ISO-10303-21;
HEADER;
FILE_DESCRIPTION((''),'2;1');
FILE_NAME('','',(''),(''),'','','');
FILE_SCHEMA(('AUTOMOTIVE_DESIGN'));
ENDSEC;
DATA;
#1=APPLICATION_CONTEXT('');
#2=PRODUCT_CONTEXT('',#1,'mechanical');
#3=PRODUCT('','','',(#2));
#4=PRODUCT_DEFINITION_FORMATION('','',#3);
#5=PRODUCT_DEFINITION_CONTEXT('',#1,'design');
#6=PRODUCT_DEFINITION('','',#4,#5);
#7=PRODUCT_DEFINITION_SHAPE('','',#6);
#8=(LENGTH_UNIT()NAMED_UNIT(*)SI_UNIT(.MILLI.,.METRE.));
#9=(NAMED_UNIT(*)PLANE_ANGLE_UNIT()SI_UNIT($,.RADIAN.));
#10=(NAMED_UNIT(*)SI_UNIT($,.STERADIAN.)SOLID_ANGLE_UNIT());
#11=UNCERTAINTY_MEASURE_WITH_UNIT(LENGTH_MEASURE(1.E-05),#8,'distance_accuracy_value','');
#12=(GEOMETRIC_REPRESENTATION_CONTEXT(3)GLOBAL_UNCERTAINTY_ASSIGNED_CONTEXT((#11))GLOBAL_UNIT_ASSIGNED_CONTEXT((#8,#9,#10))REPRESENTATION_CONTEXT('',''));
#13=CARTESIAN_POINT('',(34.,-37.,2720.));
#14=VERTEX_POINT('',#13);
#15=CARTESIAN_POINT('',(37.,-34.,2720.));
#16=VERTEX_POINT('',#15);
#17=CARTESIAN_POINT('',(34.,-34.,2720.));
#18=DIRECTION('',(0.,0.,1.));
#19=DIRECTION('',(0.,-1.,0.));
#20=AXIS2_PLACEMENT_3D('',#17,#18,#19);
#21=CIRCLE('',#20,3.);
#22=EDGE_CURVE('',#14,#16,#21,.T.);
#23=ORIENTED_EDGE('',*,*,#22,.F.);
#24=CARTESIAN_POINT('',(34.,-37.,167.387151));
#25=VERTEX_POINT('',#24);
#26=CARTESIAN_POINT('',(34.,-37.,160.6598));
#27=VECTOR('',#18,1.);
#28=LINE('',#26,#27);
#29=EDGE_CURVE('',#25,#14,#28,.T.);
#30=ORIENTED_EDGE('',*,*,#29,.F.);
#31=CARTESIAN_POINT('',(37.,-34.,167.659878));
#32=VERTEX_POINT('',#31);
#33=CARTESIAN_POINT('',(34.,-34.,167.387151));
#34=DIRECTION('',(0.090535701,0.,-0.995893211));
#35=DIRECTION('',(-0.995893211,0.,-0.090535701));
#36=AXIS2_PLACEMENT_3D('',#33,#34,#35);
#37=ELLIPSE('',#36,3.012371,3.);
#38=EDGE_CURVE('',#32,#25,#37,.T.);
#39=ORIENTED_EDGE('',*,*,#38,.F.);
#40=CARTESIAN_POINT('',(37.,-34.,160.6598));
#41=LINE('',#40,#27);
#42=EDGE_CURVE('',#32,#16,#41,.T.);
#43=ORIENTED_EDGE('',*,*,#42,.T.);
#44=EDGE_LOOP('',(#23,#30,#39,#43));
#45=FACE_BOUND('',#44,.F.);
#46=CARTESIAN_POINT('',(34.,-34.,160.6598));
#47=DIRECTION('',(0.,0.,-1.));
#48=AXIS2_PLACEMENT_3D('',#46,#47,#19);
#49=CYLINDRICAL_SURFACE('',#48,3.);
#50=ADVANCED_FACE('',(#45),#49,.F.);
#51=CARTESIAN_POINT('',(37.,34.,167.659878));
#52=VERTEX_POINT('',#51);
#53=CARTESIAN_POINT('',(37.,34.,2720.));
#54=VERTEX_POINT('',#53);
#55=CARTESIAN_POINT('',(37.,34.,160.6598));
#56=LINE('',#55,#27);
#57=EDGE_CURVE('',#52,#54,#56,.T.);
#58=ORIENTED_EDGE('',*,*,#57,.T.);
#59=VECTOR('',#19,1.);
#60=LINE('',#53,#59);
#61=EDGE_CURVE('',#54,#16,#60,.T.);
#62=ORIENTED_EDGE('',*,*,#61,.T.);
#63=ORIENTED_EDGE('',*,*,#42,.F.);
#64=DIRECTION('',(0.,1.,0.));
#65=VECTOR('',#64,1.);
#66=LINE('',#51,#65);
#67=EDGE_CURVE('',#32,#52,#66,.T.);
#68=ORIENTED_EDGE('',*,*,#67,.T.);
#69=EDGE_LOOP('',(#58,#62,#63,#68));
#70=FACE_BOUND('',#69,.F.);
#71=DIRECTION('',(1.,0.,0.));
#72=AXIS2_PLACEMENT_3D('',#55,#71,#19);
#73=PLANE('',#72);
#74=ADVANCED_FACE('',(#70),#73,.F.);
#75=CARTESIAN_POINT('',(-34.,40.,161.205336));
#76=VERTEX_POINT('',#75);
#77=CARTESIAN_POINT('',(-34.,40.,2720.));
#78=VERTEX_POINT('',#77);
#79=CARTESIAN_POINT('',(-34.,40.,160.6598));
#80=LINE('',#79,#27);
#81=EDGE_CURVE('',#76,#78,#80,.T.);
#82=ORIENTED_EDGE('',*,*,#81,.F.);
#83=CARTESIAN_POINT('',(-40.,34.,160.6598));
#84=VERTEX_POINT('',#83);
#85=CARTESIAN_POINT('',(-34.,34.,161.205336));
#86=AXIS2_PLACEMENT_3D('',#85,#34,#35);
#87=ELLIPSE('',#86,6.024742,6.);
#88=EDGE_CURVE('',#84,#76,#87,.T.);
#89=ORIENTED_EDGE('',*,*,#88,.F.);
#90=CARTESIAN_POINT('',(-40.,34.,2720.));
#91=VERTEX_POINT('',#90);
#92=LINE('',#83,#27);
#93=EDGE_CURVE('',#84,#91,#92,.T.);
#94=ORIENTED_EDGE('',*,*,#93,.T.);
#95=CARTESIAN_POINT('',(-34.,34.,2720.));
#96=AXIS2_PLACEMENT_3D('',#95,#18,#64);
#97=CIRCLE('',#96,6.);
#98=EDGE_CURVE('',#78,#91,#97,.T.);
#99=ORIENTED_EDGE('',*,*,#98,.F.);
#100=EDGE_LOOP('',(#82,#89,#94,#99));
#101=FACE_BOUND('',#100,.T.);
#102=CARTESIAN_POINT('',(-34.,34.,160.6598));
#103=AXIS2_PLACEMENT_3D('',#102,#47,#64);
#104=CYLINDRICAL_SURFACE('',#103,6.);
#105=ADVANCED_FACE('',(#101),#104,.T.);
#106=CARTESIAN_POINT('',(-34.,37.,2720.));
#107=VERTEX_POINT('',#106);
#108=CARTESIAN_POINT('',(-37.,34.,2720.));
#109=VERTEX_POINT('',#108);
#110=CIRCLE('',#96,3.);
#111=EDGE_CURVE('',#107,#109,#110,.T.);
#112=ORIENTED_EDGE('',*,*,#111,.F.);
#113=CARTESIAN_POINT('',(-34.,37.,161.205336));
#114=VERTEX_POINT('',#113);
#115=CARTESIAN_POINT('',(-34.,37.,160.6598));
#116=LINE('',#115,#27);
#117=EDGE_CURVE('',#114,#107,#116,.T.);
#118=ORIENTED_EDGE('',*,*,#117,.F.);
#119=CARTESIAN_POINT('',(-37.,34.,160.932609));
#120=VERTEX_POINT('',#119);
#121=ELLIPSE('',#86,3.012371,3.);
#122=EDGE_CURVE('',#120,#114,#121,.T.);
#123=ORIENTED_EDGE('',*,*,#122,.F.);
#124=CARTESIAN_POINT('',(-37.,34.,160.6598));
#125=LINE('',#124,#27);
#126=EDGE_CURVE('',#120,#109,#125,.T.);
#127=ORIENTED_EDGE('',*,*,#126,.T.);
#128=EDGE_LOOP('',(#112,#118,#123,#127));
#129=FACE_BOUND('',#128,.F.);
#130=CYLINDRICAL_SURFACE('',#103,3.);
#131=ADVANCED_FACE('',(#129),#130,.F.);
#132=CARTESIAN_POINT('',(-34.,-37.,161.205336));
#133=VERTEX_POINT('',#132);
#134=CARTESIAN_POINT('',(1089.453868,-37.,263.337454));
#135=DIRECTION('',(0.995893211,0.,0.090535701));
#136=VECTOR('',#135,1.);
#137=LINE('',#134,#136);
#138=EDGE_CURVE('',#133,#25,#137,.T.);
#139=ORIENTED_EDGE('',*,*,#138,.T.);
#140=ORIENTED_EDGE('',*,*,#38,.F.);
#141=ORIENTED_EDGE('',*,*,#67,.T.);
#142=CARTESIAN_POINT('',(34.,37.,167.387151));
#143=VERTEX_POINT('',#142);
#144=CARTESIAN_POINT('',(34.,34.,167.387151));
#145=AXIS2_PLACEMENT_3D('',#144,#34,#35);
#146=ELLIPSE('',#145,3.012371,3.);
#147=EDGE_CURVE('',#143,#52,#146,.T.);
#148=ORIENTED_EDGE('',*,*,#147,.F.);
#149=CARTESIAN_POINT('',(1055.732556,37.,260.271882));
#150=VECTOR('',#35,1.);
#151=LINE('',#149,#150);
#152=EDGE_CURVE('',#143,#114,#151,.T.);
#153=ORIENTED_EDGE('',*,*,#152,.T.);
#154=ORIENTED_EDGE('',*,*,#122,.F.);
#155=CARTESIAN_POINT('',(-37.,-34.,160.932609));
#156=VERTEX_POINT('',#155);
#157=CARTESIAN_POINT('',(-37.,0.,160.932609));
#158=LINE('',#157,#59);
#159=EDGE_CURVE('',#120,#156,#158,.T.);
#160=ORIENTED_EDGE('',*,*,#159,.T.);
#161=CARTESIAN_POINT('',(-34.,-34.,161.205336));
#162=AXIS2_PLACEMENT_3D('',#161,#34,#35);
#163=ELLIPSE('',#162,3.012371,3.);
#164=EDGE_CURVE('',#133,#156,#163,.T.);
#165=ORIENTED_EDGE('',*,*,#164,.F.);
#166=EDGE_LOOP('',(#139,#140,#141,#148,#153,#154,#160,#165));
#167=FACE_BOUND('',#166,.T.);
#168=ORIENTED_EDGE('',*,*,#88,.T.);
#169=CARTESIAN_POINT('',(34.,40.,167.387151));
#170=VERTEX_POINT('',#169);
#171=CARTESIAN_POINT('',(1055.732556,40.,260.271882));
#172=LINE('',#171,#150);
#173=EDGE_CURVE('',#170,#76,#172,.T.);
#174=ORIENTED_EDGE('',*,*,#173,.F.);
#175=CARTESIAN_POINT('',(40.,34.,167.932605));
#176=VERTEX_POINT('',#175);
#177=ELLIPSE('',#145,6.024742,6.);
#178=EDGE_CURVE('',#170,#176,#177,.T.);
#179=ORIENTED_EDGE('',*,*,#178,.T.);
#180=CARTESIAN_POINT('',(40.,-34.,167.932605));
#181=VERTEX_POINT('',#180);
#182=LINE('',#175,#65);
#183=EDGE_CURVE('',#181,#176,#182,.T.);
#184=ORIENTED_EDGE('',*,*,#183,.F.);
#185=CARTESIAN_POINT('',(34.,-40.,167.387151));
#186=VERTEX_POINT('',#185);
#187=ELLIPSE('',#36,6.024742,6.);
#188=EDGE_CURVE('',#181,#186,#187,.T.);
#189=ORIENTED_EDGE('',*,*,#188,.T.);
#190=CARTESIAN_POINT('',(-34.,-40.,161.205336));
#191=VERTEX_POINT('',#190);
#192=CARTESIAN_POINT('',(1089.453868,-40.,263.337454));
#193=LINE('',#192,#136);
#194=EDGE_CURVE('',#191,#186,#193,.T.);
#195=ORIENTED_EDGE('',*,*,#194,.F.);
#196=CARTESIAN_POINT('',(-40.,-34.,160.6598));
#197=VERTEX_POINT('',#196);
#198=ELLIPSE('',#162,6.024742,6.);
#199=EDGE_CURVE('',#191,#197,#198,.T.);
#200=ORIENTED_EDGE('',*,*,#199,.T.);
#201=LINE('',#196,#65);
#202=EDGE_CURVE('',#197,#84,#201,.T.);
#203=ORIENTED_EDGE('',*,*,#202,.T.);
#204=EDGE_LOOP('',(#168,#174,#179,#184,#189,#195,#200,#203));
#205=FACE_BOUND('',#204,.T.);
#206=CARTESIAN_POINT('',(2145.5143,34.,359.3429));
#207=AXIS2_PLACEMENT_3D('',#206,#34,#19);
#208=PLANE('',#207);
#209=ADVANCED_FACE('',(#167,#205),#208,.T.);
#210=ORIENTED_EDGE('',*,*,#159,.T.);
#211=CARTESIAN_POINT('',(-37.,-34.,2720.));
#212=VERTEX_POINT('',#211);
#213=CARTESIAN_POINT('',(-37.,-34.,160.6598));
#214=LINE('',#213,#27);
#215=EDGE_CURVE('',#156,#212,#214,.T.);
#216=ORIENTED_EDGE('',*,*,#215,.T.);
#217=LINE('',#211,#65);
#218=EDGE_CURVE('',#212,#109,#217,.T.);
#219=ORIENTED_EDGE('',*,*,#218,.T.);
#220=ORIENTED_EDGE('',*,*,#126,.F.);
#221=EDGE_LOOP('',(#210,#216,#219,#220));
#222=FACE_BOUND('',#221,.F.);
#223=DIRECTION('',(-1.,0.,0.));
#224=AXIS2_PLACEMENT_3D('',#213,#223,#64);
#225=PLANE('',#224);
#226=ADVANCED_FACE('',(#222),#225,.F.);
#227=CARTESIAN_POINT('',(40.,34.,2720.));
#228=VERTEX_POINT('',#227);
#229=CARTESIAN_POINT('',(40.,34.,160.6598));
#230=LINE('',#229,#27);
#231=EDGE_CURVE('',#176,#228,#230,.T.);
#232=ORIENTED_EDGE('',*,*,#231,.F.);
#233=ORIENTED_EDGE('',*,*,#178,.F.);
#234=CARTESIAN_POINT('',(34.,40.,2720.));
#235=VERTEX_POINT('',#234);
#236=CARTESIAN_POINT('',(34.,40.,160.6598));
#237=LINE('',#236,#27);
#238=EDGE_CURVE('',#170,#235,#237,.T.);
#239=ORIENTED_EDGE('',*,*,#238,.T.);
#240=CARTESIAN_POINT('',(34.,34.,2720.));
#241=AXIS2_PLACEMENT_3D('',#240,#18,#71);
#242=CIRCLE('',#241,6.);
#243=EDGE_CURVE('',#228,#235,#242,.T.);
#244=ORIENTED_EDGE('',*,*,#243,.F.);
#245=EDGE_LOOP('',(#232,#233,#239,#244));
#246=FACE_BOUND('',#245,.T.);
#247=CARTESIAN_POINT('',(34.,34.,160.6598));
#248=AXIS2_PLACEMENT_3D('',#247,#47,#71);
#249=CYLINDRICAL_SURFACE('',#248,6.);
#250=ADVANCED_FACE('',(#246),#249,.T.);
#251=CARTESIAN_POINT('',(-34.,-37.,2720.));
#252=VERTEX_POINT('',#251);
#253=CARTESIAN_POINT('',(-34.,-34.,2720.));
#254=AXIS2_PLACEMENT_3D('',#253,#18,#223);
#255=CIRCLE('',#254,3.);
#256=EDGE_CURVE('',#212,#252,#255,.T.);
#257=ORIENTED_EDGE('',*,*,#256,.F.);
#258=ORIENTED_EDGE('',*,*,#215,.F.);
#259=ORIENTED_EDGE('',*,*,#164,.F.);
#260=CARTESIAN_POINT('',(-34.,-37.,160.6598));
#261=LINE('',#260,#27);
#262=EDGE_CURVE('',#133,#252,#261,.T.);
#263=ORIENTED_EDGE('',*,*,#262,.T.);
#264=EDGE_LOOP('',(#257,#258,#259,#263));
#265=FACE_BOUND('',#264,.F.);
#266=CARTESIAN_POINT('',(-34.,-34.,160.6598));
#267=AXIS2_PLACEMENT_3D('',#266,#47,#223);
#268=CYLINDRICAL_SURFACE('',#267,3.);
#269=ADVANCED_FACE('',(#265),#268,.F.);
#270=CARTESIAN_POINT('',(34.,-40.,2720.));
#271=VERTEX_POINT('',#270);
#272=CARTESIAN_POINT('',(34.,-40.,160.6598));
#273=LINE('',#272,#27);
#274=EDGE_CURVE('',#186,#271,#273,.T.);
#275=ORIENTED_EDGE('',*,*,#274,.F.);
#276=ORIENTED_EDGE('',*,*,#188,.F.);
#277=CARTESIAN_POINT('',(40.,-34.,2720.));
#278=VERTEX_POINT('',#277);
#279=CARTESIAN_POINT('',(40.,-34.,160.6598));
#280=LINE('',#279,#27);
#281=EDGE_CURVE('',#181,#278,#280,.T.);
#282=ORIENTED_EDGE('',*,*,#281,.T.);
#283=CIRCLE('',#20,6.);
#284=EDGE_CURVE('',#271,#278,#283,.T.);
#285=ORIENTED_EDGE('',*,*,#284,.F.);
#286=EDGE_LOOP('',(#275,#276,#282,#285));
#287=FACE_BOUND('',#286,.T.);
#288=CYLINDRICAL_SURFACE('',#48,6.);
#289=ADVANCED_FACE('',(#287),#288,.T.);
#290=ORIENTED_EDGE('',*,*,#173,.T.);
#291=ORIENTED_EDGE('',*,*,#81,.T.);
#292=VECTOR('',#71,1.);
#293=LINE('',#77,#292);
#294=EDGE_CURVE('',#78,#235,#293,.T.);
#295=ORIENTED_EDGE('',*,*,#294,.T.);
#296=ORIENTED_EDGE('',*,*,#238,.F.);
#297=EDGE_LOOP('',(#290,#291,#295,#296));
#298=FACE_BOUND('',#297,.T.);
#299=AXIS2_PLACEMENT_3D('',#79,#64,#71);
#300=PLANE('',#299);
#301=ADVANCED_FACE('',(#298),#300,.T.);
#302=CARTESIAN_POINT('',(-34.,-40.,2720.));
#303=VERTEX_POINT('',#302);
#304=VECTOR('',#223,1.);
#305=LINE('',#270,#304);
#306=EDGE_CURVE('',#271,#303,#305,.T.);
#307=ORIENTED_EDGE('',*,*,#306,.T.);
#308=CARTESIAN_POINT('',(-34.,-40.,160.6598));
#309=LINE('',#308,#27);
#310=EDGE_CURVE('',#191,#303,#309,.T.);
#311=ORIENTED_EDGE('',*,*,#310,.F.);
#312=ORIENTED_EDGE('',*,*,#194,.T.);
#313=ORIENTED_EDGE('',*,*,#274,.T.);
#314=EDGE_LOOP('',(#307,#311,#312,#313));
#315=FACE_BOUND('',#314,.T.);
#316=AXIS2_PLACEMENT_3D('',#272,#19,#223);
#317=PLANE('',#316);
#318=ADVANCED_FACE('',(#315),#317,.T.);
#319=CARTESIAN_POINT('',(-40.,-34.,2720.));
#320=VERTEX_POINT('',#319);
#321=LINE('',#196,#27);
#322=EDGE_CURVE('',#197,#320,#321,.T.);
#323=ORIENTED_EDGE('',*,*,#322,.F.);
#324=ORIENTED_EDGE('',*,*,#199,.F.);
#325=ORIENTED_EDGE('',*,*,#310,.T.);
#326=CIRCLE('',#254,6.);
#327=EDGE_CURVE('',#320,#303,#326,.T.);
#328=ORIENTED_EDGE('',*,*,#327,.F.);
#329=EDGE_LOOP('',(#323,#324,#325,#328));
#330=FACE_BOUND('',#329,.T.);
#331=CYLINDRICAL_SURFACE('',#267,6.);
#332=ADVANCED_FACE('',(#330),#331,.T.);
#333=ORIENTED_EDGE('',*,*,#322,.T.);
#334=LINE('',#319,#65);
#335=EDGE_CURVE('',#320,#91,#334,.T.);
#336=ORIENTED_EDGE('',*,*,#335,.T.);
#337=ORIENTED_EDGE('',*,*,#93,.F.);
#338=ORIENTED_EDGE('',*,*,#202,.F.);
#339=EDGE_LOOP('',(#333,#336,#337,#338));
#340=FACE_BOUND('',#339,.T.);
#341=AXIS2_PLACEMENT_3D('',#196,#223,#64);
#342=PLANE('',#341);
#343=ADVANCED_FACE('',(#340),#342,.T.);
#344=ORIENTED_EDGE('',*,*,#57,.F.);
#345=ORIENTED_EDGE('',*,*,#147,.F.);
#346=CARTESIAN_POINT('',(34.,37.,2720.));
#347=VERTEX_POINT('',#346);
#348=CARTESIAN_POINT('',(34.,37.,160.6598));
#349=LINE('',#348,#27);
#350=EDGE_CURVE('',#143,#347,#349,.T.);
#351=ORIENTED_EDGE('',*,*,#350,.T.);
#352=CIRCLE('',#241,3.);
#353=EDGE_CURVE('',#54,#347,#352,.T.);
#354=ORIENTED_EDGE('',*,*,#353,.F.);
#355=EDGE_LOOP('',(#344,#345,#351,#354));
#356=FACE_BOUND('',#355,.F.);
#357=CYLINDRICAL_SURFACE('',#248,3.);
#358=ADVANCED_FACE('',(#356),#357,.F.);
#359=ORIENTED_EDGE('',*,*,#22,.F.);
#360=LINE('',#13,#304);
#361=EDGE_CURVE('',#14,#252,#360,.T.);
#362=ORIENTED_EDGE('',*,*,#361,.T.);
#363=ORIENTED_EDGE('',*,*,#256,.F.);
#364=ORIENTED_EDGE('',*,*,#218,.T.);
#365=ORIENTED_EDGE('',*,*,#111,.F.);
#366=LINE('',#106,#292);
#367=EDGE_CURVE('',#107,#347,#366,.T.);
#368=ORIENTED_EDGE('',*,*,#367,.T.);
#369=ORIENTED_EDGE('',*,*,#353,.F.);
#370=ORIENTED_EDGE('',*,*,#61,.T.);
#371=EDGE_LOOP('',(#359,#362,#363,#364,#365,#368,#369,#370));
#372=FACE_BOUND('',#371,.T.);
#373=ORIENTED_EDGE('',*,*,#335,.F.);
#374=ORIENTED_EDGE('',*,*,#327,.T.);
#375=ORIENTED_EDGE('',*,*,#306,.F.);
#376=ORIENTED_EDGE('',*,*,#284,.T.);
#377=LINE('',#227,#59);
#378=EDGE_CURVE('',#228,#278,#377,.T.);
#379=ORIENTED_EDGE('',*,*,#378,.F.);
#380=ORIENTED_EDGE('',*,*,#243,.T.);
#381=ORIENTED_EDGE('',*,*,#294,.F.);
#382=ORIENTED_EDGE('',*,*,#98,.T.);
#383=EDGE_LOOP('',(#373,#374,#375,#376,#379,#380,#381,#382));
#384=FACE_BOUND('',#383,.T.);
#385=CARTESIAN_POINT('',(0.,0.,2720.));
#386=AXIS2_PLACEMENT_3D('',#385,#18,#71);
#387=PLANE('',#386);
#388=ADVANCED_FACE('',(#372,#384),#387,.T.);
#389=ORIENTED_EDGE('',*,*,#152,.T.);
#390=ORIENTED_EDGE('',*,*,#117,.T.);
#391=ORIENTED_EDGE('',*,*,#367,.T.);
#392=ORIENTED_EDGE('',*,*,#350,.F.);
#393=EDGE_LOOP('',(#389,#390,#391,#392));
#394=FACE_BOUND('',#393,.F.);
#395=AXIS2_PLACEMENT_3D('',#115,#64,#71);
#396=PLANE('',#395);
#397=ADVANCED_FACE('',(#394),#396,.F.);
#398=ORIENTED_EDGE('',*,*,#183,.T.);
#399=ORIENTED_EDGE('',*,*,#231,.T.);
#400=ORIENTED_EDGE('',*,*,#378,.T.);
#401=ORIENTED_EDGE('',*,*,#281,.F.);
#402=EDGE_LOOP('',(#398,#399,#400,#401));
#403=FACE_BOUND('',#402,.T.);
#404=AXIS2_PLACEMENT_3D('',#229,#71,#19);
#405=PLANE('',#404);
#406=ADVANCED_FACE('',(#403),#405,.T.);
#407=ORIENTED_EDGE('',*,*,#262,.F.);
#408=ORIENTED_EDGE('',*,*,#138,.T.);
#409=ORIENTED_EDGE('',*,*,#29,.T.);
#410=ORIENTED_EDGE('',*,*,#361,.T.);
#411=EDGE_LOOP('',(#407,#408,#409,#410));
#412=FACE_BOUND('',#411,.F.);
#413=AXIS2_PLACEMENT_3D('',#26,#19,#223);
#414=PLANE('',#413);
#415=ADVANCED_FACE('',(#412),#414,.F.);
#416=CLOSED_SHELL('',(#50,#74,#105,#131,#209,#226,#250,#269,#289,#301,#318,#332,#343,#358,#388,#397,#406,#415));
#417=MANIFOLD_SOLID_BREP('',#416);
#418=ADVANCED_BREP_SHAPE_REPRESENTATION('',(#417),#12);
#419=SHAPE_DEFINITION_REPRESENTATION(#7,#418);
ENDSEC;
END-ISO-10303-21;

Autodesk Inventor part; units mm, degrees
ref_plane "Start Plane" through (0, 0, 160.6598) normal (0, 0, 1) x (1, 0, 0)
ref_plane "End Plane" through (0, 0, 2720) normal (0, 0, 1) x (1, 0, 0)
sketch "Sketch" plane through (0, 0, 0) normal (0, 0, 1) x (1, 0, 0)
  line L0 (-40, -34) -> (-40, 34)
  line L1 (-34, 40) -> (34, 40)
  line L2 (40, 34) -> (40, -34)
  line L3 (34, -40) -> (-34, -40)
  arc A0 (-40, -34) -> (-34, -40) centre (-34, -34) ccw
  arc A1 (40, 34) -> (34, 40) centre (34, 34) ccw
  arc A2 (-34, 40) -> (-40, 34) centre (-34, 34) ccw
  arc A3 (34, -40) -> (40, -34) centre (34, -34) ccw
  arc A4 (-34, 37) -> (-37, 34) centre (-34, 34) ccw
  line L4 (-34, 37) -> (34, 37)
  arc A5 (37, 34) -> (34, 37) centre (34, 34) ccw
  line L5 (37, 34) -> (37, -34)
  arc A6 (34, -37) -> (37, -34) centre (34, -34) ccw
  line L6 (34, -37) -> (-34, -37)
  arc A7 (-37, -34) -> (-34, -37) centre (-34, -34) ccw
  line L7 (-37, -34) -> (-37, 34)
  line L8 (0, 57.7397) -> (0, -57.7397) construction
  line L9 (-57.7397, 0) -> (57.7397, 0) construction
  dimension "d7" = 6
  dimension "d9" = 80
  dimension "d11" = 80
  dimension "d12" = 3
  dimension "d15" = 40
  dimension "d16" = 40
extrude "Body" add sketch "Sketch" along normal up to surface (2559.3402 mm away) from surface at 160.6598
sketch "Sketch3" plane through (0, 0, 0) normal (0, 0, 1) x (1, 0, 0)
  line L0 (0, 0) -> (10, 0)
ref_plane "Work Plane3" through (0, 0, 0) normal (0, -1, 0) x (1, 0, 0)
ref_plane "Work Plane4" through (2145.5143, 34, 359.3429) normal (0.0905357, 0, -0.9958932) x (-0.9958932, 0, -0.0905357)
split "Split1" plane through (2145.5143, 34, 359.3429) removes the side toward (0.0905357, 0, -0.9958932)
sketch "Sketch4" plane through (0, 0, 0) normal (0, -1, 0) x (1, 0, 0)
  line L0 (-2, 160.6598) -> (12, 160.6598) projected
  line L1 (-2, 2720) -> (12, 2720) projected
  dimension "d18" = 2559.3402
equation "\"d7\" = G_IR"
equation "\"d9\" = G_W"
equation "\"d11\" = G_H"
equation "\"d12\" = G_T"
equation "\"d15\" = 0.5 * d9"
equation "\"d16\" = 0.5 * d11"
equation "\"d3\" = G_L"
equation "\"G_W\" = 80"
equation "\"G_H\" = 80"
equation "\"G_T\" = 3"
equation "\"G_IR\" = 6"
equation "\"G_L\" = d18"
equation "\"G_OFFSET_START\" = -160.6598"
equation "\"d13\" = -G_OFFSET_START"
properties part number "ISO 10799-2 - 80x80x3 - 2559,34" material "Steel, Mild"
